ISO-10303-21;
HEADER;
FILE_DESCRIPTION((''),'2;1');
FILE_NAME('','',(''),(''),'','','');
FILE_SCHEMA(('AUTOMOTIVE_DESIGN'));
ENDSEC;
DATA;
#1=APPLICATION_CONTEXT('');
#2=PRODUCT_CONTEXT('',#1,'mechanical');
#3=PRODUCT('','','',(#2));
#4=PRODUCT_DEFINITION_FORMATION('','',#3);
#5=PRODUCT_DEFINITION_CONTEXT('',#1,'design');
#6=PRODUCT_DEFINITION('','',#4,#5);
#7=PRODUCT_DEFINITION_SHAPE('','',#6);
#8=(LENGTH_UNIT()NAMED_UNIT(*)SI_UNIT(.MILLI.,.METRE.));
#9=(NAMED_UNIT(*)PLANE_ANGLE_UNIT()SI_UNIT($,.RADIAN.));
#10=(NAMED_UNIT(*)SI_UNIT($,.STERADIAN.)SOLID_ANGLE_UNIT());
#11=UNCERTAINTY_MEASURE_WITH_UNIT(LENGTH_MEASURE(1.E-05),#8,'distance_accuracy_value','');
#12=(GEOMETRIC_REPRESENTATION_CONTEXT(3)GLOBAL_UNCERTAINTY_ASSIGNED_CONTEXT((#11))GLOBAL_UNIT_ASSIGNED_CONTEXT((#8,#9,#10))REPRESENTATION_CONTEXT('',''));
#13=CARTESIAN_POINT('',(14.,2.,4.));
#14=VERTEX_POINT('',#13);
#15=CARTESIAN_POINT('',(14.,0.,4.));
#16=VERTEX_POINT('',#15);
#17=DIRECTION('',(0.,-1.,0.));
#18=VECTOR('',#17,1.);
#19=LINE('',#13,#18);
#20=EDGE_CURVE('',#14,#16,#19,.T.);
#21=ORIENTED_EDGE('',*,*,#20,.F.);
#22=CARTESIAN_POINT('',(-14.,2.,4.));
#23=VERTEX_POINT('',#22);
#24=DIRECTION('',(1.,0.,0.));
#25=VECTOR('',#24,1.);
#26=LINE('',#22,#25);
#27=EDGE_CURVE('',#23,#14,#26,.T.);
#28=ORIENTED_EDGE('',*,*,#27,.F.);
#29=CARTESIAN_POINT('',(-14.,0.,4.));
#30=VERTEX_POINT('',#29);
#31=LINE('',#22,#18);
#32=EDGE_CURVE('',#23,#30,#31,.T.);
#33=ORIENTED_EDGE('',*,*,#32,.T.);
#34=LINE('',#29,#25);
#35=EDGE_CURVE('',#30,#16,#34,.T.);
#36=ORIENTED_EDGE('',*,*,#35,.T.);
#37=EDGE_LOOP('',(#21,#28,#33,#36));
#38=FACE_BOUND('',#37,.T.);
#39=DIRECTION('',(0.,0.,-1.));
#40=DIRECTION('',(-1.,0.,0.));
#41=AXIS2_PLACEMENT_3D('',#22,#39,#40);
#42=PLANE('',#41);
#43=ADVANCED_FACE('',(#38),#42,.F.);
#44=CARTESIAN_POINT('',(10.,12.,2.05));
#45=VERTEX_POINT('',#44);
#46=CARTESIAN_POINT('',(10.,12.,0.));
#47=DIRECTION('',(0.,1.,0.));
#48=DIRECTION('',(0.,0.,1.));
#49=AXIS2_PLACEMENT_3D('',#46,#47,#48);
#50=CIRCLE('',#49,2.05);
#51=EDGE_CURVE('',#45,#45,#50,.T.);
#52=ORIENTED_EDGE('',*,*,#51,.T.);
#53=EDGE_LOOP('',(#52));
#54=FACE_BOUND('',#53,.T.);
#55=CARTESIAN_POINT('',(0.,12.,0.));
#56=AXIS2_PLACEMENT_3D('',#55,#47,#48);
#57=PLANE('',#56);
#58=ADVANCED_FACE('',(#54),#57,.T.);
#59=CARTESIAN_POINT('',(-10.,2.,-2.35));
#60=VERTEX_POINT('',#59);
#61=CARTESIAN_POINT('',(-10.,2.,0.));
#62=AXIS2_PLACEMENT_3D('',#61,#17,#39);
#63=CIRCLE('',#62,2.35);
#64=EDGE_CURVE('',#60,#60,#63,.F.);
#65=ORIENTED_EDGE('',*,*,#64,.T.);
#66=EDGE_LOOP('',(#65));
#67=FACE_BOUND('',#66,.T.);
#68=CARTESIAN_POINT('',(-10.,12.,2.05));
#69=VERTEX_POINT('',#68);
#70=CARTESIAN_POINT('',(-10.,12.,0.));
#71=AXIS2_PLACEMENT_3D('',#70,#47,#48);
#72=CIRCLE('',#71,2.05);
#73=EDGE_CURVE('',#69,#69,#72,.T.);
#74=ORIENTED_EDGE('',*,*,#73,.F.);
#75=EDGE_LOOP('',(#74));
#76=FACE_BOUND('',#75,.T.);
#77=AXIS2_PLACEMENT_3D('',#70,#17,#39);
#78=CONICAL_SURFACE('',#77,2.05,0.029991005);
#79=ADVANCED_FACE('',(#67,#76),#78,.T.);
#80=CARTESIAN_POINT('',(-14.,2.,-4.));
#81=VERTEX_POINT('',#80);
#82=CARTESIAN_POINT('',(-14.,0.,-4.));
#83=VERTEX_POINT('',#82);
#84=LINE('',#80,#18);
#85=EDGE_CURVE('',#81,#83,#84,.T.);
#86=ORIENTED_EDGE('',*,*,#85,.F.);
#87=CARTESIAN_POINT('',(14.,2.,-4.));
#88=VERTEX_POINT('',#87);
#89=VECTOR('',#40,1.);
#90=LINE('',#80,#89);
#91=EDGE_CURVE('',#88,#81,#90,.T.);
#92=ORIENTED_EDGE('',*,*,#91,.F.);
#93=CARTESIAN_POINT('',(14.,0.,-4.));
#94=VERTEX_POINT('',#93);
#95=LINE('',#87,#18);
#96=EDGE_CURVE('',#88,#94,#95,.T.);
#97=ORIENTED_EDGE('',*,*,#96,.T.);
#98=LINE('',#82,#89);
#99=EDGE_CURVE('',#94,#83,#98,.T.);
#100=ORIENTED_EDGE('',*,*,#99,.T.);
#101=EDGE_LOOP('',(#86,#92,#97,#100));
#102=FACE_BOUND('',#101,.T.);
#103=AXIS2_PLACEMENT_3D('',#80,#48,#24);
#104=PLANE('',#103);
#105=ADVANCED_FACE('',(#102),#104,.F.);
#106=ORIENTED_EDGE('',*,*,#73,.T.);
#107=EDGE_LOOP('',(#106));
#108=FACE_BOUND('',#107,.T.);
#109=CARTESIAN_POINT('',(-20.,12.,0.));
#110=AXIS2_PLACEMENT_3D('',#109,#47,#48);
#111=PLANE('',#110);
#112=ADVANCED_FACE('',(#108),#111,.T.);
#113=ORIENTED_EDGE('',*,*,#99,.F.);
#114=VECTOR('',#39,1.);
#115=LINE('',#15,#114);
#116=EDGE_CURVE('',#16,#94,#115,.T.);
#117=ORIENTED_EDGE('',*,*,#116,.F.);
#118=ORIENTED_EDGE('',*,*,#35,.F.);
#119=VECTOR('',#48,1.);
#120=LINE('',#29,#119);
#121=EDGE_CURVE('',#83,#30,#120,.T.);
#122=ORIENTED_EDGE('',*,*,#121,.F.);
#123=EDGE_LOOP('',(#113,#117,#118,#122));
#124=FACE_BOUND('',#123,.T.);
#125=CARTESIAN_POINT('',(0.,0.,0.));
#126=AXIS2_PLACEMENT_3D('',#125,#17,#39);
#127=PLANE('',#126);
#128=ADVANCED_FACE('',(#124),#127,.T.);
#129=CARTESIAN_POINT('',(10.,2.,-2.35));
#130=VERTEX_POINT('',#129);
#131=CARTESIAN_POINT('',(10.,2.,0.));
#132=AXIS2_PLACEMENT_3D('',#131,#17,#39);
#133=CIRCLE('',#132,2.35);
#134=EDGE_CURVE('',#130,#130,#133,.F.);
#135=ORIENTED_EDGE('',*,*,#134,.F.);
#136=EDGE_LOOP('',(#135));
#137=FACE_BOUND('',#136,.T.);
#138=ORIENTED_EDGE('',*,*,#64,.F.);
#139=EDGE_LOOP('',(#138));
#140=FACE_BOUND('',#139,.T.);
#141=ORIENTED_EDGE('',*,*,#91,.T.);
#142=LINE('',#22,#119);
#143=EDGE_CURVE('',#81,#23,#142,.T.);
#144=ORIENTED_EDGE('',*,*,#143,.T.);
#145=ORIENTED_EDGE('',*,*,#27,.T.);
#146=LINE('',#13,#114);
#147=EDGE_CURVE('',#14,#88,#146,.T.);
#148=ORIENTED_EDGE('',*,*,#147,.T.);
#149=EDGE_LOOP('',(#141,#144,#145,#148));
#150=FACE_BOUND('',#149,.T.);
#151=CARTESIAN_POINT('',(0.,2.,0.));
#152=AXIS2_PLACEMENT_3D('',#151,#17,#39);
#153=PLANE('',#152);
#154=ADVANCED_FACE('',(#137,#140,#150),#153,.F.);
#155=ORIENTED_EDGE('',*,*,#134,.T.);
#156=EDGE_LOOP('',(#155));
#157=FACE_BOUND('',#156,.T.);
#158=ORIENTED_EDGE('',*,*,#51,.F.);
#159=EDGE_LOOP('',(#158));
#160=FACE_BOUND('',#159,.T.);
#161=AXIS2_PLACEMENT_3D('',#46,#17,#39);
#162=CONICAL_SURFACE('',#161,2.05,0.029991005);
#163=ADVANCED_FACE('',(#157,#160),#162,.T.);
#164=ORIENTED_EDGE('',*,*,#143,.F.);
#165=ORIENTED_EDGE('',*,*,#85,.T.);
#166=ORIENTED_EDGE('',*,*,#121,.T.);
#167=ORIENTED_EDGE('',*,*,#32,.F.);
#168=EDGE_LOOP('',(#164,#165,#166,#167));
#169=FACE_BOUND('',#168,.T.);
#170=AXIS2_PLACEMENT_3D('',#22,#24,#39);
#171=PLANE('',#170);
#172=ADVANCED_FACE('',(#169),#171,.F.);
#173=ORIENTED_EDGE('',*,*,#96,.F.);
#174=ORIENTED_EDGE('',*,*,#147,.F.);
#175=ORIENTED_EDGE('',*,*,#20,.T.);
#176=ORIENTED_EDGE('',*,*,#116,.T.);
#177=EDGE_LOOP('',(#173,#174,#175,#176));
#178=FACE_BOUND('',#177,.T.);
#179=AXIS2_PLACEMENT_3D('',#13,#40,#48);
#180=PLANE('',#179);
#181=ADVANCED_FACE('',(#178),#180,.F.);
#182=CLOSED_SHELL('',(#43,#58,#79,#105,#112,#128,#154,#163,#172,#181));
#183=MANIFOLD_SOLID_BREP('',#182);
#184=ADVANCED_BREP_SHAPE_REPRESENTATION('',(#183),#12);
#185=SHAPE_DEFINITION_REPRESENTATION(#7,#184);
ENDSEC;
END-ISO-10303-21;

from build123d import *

# Parameters (mm, degrees)
SKETCH2_W                    = 28
SKETCH2_H                    = 8
BOSS_EXTRUDE1_DEPTH          = 2
SKETCH3_R                    = 2.35
BOSS_EXTRUDE2_DEPTH          = 10
CHAMFER1_SIZE                = 10
CHAMFER1_SIZE_2              = 0.3
LPATTERN1_COUNT              = 2
LPATTERN1_PITCH              = 20
CHAMFER1_OF_LPATTERN1_SIZE   = 10
CHAMFER1_OF_LPATTERN1_SIZE_2 = 0.3


with BuildPart() as part:
    # Sketch2 → Boss-Extrude1 (new body)
    with BuildSketch(Plane(origin=(0, 0, 0), x_dir=(1, 0, 0), z_dir=(0, 1, 0))):
        Rectangle(SKETCH2_W, SKETCH2_H)
    extrude(amount=BOSS_EXTRUDE1_DEPTH)

    # Sketch3 → Boss-Extrude2 (add)
    with BuildSketch(Plane(origin=(0, 2, 0), x_dir=(1, 0, 0), z_dir=(0, 1, 0))):
        with Locations(Location((10, 0, 0), (0, 0, 90))):
            Circle(SKETCH3_R)
    boss_extrude2 = extrude(amount=BOSS_EXTRUDE2_DEPTH)

    # Chamfer1
    # the kernel refuses this chamfer: 10, 0.3 mm, written as the material it takes off along each edge
    with BuildSketch(Plane(origin=(10, 12, 0), x_dir=(0, 0, -1), z_dir=(1, 0, 0))) as chamfer1_piece_1_section:
        Polygon((2.35, -CHAMFER1_SIZE), (2.35 - CHAMFER1_SIZE_2, 0), (2.35, 0), align=None)
    chamfer1_piece_1 = revolve(axis=Axis((10, 12, 0), (0, 1, 0)), mode=Mode.PRIVATE)
    chamfer1_piece_1 = split(chamfer1_piece_1, bisect_by=Plane(origin=(10, 2, 2.231636086), z_dir=(0, 1, 0)), keep=Keep.TOP, mode=Mode.PRIVATE)
    add(chamfer1_piece_1, mode=Mode.SUBTRACT)

    # LPattern1: Boss-Extrude2 ×2
    with Locations(*[(-i * LPATTERN1_PITCH, 0, 0) for i in range(1, LPATTERN1_COUNT)]):
        add(boss_extrude2)

    # Chamfer1 of LPattern1
    # the kernel refuses this chamfer: 10, 0.3 mm, written as the material it takes off along each edge
    with BuildSketch(Plane(origin=(-10, 12, 0), x_dir=(0, 0, -1), z_dir=(1, 0, 0))) as chamfer1_of_lpattern1_piece_1_section:
        Polygon((2.35, -CHAMFER1_OF_LPATTERN1_SIZE), (2.35 - CHAMFER1_OF_LPATTERN1_SIZE_2, 0), (2.35, 0), align=None)
    chamfer1_of_lpattern1_piece_1 = revolve(axis=Axis((-10, 12, 0), (0, 1, 0)), mode=Mode.PRIVATE)
    chamfer1_of_lpattern1_piece_1 = split(chamfer1_of_lpattern1_piece_1, bisect_by=Plane(origin=(-10, 2, 2.231636086), z_dir=(0, 1, 0)), keep=Keep.TOP, mode=Mode.PRIVATE)
    add(chamfer1_of_lpattern1_piece_1, mode=Mode.SUBTRACT)


solid = part.part
